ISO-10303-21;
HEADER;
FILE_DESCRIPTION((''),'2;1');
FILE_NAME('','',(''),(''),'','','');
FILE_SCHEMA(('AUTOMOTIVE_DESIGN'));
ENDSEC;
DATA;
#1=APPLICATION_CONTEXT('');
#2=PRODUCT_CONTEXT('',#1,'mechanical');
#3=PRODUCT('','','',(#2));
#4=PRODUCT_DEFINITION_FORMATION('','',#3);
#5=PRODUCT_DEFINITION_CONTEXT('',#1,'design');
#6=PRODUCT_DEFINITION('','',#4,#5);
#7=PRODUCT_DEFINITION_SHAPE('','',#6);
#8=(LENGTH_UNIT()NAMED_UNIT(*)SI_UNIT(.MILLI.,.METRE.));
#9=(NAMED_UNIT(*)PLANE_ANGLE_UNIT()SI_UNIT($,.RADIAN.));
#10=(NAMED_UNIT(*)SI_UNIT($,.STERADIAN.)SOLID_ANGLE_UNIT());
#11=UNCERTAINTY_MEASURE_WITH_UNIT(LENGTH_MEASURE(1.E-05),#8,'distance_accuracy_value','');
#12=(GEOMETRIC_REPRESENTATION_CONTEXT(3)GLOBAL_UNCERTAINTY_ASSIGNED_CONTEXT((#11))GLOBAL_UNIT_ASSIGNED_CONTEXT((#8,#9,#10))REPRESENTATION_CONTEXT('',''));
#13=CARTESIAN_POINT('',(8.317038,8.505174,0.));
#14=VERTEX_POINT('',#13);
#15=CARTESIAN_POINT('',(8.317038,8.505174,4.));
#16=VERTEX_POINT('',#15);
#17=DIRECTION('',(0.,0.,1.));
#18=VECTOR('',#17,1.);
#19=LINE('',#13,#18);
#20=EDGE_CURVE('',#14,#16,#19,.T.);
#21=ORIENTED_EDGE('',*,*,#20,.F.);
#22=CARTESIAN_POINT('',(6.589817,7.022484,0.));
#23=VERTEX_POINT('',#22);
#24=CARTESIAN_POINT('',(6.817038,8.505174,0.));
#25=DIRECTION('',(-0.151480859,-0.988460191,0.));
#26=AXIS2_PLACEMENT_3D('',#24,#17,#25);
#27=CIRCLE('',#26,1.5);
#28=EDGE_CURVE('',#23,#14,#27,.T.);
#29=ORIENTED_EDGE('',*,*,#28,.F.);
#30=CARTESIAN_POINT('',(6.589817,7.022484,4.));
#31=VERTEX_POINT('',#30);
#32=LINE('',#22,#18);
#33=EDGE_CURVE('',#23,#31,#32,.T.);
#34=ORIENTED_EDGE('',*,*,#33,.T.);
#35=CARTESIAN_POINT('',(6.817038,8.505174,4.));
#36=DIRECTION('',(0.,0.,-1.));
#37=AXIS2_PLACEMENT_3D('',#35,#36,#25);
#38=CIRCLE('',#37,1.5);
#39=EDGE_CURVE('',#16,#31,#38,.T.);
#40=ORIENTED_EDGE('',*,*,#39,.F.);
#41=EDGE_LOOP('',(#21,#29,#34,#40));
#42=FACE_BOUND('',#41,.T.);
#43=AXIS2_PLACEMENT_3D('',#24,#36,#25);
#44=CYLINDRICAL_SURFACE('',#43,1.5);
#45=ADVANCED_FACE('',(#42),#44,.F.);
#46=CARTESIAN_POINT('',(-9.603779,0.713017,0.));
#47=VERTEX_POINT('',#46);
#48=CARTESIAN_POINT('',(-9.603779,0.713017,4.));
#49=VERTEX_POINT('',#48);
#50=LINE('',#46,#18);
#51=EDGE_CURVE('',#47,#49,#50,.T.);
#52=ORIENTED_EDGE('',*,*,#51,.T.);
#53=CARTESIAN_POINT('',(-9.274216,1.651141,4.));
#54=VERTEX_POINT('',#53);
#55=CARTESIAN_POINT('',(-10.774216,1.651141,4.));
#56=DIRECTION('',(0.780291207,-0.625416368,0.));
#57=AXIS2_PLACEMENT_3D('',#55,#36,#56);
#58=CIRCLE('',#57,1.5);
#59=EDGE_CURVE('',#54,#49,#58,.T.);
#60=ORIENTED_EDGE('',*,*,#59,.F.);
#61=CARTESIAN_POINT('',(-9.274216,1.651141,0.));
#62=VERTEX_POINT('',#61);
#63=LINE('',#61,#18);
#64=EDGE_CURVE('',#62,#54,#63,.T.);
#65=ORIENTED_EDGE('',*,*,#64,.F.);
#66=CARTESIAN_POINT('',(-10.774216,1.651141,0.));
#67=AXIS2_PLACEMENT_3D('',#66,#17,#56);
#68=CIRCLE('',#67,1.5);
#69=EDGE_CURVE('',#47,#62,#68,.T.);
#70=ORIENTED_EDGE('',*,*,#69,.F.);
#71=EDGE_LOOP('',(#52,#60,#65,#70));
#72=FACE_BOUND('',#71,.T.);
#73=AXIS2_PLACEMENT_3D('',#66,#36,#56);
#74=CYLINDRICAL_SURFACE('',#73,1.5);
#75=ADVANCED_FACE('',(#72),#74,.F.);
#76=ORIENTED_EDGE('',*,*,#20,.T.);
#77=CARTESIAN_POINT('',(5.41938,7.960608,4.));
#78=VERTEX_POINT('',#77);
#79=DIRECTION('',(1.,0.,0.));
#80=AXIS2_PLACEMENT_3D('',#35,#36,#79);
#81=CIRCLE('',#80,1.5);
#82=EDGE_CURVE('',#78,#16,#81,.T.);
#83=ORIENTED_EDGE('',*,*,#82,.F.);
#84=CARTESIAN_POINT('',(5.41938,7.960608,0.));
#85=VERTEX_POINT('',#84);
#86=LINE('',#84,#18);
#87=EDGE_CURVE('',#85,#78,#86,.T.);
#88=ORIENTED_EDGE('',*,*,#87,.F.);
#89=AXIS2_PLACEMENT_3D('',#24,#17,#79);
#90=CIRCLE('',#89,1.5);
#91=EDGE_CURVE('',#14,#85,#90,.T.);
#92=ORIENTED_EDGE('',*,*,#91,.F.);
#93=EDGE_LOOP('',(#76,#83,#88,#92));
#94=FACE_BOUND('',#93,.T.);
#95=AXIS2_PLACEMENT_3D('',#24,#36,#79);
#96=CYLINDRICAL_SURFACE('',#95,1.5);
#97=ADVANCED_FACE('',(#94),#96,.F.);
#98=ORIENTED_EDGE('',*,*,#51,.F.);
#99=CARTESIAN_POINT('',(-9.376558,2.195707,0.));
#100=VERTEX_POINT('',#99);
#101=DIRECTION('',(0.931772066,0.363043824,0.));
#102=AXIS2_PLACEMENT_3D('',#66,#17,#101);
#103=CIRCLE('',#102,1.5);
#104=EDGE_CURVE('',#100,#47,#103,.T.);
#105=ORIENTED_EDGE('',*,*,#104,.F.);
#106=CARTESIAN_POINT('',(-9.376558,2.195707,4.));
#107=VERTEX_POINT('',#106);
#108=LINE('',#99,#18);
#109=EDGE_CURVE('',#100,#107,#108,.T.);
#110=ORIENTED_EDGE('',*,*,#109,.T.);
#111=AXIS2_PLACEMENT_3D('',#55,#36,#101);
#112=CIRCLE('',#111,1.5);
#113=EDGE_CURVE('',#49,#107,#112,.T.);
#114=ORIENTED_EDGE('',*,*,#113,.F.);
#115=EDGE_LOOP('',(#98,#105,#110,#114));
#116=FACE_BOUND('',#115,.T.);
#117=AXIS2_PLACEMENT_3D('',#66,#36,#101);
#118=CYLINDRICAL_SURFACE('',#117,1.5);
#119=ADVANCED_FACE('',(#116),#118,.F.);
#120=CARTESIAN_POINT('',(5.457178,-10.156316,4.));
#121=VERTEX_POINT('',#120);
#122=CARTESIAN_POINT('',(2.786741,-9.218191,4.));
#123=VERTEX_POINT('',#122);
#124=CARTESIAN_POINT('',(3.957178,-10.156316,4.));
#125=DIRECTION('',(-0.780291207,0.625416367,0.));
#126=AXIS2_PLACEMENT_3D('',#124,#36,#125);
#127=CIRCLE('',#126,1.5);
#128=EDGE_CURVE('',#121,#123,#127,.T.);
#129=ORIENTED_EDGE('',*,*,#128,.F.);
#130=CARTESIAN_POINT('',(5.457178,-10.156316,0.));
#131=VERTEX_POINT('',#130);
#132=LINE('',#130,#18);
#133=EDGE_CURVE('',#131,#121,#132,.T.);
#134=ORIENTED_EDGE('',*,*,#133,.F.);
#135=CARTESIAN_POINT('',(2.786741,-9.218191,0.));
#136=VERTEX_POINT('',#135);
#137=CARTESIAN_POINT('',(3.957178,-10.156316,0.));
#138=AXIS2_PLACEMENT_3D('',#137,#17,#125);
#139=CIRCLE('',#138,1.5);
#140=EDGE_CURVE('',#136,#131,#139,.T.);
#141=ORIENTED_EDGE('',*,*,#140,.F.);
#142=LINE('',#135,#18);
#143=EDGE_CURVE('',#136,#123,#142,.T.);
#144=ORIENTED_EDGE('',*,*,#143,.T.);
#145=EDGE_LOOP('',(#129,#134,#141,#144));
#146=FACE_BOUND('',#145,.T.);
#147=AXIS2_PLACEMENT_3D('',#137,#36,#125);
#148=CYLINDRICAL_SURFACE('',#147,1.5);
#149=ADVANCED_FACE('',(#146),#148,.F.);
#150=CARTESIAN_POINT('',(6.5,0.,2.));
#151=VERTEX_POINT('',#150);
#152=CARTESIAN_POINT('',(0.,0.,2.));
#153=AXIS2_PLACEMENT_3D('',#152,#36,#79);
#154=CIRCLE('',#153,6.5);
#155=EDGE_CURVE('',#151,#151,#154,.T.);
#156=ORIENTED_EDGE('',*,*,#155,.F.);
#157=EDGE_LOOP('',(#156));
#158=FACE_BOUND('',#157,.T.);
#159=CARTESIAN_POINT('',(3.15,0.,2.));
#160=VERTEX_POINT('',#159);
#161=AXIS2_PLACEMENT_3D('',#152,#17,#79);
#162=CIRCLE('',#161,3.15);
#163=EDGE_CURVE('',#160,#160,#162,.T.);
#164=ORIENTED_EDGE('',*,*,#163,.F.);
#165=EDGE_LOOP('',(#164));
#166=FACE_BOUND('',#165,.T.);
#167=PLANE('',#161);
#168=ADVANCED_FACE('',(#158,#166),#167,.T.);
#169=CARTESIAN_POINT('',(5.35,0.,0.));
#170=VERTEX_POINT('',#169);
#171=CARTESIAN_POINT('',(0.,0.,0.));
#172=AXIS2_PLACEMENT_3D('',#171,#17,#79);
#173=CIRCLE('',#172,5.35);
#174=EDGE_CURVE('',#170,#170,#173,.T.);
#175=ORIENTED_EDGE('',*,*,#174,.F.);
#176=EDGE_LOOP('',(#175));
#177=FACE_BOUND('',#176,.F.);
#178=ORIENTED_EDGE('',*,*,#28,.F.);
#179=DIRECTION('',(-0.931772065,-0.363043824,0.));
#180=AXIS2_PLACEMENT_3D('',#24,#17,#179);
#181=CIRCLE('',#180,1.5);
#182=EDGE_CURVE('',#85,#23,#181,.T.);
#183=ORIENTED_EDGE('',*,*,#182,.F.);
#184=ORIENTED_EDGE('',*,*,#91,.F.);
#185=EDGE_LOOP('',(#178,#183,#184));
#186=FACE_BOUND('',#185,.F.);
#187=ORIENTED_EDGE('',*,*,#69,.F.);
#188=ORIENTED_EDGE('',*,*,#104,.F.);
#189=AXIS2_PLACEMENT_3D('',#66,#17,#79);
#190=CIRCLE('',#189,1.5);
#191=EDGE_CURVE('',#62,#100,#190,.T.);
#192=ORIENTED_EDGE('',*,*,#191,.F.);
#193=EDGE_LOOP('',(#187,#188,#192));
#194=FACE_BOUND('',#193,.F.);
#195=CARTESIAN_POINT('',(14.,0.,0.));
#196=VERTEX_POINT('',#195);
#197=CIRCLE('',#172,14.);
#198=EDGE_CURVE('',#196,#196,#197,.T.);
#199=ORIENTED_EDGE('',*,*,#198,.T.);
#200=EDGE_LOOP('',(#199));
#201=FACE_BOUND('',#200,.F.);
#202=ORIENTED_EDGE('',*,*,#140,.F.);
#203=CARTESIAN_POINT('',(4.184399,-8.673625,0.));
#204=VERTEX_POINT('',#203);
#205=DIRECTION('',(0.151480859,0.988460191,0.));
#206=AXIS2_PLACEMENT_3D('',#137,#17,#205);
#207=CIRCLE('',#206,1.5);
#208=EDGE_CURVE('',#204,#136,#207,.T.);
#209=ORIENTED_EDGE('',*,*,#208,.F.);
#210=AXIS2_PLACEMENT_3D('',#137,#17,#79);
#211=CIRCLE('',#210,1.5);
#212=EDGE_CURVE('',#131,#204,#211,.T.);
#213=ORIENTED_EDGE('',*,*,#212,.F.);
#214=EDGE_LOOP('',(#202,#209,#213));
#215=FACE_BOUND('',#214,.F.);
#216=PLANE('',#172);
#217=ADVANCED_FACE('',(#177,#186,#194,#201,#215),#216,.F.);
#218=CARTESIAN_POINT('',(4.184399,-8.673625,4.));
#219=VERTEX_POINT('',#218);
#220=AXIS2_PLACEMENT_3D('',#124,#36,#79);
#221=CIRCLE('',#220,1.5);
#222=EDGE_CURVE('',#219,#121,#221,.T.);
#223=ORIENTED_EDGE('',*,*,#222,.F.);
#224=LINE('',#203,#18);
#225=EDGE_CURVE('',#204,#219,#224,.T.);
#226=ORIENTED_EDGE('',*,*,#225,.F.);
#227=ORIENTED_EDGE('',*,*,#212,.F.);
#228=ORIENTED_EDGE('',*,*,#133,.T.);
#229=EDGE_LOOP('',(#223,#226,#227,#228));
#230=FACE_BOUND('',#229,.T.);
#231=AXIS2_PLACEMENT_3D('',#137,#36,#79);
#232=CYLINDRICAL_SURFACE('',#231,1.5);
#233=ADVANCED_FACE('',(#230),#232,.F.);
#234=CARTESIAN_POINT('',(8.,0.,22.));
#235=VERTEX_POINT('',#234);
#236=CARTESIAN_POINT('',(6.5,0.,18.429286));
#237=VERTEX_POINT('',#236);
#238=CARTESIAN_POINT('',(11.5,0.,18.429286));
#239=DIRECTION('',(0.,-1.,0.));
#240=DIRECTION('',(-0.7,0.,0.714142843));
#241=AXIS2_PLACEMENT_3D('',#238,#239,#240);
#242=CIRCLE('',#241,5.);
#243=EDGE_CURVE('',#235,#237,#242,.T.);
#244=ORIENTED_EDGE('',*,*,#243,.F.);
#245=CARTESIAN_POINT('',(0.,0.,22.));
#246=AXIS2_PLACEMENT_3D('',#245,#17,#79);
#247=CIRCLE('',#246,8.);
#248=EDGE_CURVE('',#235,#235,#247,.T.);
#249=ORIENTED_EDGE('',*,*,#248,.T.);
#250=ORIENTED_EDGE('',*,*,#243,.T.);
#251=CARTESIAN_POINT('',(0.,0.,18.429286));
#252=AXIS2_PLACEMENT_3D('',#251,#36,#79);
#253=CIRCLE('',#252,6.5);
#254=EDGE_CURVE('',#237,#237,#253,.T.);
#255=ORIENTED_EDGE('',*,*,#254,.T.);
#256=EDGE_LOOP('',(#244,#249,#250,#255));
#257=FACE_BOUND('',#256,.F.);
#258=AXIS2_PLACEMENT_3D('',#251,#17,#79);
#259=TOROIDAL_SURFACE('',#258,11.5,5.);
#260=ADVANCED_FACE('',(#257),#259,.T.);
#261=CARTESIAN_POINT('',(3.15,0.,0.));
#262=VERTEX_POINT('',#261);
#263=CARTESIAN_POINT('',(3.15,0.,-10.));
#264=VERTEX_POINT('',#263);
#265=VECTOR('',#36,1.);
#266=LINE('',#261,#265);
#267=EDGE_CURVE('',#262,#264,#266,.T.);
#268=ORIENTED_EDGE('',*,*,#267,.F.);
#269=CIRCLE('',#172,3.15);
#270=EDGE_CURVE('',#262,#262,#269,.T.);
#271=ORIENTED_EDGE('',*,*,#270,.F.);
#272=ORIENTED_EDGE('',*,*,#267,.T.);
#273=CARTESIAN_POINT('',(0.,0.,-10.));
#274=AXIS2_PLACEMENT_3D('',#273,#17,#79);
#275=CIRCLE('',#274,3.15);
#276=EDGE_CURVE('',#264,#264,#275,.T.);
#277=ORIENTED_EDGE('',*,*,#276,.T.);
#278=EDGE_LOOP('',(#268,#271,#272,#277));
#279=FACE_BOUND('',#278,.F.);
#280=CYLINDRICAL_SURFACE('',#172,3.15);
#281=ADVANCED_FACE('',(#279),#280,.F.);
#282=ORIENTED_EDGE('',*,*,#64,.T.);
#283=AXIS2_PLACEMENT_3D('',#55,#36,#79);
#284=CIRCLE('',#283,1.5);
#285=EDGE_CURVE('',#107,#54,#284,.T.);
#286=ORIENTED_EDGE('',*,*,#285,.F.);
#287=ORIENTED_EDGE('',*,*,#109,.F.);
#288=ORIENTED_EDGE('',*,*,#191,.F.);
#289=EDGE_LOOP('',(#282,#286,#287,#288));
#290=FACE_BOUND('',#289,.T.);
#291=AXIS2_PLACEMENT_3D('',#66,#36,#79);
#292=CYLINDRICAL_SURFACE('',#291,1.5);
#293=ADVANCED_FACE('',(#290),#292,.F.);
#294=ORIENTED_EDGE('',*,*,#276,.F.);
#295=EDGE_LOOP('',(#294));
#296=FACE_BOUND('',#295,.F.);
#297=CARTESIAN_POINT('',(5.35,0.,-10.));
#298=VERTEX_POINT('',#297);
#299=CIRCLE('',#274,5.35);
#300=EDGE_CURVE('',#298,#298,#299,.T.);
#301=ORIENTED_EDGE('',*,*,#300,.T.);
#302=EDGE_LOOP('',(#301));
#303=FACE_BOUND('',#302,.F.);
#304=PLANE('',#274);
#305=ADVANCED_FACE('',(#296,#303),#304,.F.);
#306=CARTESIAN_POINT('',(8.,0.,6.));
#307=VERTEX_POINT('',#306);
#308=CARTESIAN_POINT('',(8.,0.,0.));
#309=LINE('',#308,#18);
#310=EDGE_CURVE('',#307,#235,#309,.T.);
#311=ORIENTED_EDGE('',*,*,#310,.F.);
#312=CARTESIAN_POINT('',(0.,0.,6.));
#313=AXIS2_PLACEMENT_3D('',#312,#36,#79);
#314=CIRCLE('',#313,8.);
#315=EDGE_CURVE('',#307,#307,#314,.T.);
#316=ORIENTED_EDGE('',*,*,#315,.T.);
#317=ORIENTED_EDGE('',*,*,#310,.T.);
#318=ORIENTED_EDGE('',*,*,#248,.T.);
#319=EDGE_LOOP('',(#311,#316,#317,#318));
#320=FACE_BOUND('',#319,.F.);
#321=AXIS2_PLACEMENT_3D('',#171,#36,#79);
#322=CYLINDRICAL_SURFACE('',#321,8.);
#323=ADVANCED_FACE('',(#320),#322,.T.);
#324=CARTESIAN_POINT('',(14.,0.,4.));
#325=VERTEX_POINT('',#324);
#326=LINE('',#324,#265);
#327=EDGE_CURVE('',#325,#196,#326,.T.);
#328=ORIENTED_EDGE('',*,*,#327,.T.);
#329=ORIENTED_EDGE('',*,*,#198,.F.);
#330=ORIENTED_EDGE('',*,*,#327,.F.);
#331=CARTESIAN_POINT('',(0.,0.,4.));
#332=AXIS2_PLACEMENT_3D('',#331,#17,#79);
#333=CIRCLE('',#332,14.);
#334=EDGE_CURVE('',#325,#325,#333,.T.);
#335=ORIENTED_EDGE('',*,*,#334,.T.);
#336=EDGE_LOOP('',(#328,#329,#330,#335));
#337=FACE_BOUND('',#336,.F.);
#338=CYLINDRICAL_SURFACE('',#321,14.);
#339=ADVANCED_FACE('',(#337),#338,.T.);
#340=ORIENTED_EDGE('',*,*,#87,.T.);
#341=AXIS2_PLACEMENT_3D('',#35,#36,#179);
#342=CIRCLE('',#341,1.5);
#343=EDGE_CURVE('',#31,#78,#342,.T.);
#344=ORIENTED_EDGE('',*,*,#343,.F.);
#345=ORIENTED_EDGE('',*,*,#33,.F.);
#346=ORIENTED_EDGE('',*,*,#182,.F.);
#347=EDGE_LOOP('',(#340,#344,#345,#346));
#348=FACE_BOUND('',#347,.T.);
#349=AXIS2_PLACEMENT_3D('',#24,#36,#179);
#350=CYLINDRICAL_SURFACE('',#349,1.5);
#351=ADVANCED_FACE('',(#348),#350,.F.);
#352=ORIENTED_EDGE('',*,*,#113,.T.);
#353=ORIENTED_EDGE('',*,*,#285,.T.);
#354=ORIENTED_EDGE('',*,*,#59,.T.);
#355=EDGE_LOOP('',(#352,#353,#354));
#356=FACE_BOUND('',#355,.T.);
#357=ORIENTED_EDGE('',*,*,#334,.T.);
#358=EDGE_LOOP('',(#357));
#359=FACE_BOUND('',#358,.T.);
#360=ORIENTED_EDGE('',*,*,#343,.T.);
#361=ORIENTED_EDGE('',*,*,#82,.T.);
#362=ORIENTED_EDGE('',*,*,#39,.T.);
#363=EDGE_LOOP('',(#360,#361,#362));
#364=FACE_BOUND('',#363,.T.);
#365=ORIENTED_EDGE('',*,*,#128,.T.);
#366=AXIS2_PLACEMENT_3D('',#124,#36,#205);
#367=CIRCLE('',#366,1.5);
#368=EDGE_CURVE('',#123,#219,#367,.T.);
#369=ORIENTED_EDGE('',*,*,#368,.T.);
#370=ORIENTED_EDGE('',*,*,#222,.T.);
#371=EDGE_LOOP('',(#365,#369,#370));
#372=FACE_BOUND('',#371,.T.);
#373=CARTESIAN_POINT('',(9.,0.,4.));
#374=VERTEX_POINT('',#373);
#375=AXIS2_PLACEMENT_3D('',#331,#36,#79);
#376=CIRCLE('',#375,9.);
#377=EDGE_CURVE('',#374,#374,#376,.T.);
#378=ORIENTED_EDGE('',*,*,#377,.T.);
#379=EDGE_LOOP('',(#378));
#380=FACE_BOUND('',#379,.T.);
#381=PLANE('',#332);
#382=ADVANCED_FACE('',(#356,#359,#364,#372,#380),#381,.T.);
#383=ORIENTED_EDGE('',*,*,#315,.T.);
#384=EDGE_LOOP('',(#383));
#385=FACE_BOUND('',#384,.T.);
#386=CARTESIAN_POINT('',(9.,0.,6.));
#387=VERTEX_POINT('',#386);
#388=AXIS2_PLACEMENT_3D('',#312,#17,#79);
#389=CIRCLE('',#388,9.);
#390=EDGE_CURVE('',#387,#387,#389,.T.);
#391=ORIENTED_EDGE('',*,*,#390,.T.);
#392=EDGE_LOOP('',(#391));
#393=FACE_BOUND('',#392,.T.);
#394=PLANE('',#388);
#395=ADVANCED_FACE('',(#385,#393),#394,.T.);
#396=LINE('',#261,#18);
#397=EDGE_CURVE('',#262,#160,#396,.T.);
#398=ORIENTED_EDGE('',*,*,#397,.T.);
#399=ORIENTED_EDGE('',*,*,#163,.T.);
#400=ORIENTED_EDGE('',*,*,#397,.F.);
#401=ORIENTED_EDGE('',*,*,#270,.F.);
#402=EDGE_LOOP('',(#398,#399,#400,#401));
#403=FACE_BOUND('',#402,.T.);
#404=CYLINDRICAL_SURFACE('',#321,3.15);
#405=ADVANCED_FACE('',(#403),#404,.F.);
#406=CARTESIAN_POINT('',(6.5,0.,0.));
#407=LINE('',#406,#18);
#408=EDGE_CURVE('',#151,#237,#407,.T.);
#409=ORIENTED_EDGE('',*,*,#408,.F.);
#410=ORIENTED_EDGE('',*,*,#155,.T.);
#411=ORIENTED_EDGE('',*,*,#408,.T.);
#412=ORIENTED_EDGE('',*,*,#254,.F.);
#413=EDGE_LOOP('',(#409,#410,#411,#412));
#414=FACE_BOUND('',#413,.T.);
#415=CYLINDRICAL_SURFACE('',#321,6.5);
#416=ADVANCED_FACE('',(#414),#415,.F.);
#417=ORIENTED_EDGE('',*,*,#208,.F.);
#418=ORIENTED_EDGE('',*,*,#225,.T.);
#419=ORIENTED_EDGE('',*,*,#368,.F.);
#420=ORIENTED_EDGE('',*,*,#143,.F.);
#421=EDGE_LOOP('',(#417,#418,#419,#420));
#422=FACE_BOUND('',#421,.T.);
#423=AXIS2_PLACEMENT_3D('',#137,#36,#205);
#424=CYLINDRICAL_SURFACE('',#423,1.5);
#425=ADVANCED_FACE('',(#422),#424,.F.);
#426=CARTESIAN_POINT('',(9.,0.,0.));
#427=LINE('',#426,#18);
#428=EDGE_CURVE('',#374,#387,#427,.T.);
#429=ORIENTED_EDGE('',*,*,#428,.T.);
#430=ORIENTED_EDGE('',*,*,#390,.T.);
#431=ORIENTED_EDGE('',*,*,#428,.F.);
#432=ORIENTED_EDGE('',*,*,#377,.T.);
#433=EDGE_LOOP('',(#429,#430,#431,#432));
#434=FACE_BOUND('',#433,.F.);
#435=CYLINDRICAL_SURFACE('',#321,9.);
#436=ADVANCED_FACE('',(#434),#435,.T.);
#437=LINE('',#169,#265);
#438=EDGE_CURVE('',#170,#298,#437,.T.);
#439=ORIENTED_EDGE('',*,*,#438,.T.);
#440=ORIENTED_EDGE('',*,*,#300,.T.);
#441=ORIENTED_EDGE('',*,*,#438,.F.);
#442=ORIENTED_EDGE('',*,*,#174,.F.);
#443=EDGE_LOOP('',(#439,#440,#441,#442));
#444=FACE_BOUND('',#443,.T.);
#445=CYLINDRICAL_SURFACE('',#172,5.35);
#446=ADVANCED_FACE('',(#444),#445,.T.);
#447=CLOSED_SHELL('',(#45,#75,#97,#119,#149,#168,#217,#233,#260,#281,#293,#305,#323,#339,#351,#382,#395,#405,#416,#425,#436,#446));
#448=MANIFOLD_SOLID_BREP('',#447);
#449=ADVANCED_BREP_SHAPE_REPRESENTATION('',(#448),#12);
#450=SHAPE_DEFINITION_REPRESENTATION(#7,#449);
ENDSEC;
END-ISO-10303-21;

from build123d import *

# Parameters (mm, degrees)
F0_R      = 14
F0_R_2    = 3.15
F1_DEPTH  = 4
F2_R      = 9
F3_DEPTH  = 6
F4_R      = 8
F5_DEPTH  = 22
F6_R      = 6.5
F7_DEPTH  = 25
F10_DEPTH = 2
F11_DEPTH = 25
F9_R      = 5.35
F9_R_2    = 3.15
F12_DEPTH = 10


# Not quite as in the source:
# - a fillet or chamfer that OpenCascade refuses, or shapes differently, is made with other operations: its cross-section is extruded or revolved along the edge and cut away or added


with BuildPart() as f1:
    # F0 (on Top) → F1 (new body)
    with BuildSketch(Plane.XY):
        Circle(F0_R)
        Circle(F0_R_2, mode=Mode.SUBTRACT)
    extrude(amount=F1_DEPTH)

    # F2 (on Top) → F3 (join)
    with BuildSketch(Plane.XY):
        Circle(F2_R)
    extrude(amount=F3_DEPTH)

    # F4 (on Top) → F5 (join)
    with BuildSketch(Plane.XY):
        Circle(F4_R)
    extrude(amount=F5_DEPTH)

    # F6 (on Top) → F7 (cut)
    with BuildSketch(Plane.XY):
        Circle(F6_R)
    extrude(amount=F7_DEPTH, mode=Mode.SUBTRACT)

    # F0 (on Top) → F10 (join)
    with BuildSketch(Plane.XY):
        Circle(F0_R)
        Circle(F0_R_2, mode=Mode.SUBTRACT)
    extrude(amount=F10_DEPTH)

    # F8 (on Top) → F11 (cut)
    with BuildSketch(Plane.XY):
        with BuildLine():
            Line((3.9571776785, -10.1563155141), (2.7867408683, -9.2181909629))
            ThreePointArc((2.7867408683, -9.2181909629), (3.460013327, -11.5715284336), (5.4571776785, -10.1563155141))
            ThreePointArc((5.4571776785, -10.1563155141), (5.0953410965, -9.1792873497), (4.1843989666, -8.6736252274))
            Line((4.1843989666, -8.6736252274), (3.9571776785, -10.1563155141))
        make_face()
        with BuildLine():
            ThreePointArc((4.1843989666, -8.6736252274), (3.4126119429, -8.7586574158), (2.7867408683, -9.2181909629))
            Line((2.7867408683, -9.2181909629), (3.9571776785, -10.1563155141))
            Line((3.9571776785, -10.1563155141), (4.1843989666, -8.6736252274))
        make_face()
        with BuildLine():
            Line((-9.6037792731, 0.7130168091), (-10.7742160833, 1.6511413602))
            Line((-10.7742160833, 1.6511413602), (-9.376557985, 2.1957070958))
            ThreePointArc((-9.376557985, 2.1957070958), (-12.2569063699, 1.8783626483), (-9.6037792731, 0.7130168091))
        make_face()
        with BuildLine():
            Line((-9.376557985, 2.1957070958), (-10.7742160833, 1.6511413602))
            Line((-10.7742160833, 1.6511413602), (-9.6037792731, 0.7130168091))
            ThreePointArc((-9.6037792731, 0.7130168091), (-9.3590031637, 1.1539770087), (-9.2742160833, 1.6511413602))
            ThreePointArc((-9.2742160833, 1.6511413602), (-9.3000235674, 1.9281908617), (-9.376557985, 2.1957070958))
        make_face()
        with BuildLine():
            ThreePointArc((8.3170384048, 8.5051741539), (6.5399889033, 9.9793666697), (5.4193803065, 7.9606084183))
            Line((5.4193803065, 7.9606084183), (6.8170384048, 8.5051741539))
            Line((6.8170384048, 8.5051741539), (6.5898171167, 7.0224838672))
            ThreePointArc((6.5898171167, 7.0224838672), (7.7940665691, 7.3670107359), (8.3170384048, 8.5051741539))
        make_face()
        with BuildLine():
            Line((6.8170384048, 8.5051741539), (5.4193803065, 7.9606084183))
            ThreePointArc((5.4193803065, 7.9606084183), (5.8789138537, 7.3347373437), (6.5898171167, 7.0224838672))
            Line((6.5898171167, 7.0224838672), (6.8170384048, 8.5051741539))
        make_face()
    extrude(amount=F11_DEPTH, mode=Mode.SUBTRACT)

    # F9 (on Top) → F12 (join)
    with BuildSketch(Plane.XY):
        Circle(F9_R)
        Circle(F9_R_2, mode=Mode.SUBTRACT)
    extrude(amount=-F12_DEPTH)

    # F13: fillet of radius 5 on 1 edges, made by hand

    # F13_s1 → F13_t2 (revolve, cut)
    with BuildSketch(Plane.XZ):
        with BuildLine():
            ThreePointArc((8, 22), (6.8902277714, 20.3657774588), (6.5, 18.4292857857))
            Line((6.5, 18.4292857857), (6.5, 22))
            Line((6.5, 22), (8, 22))
        make_face()
    revolve(axis=Axis((0, 0, 22), (0, 0, -1)), mode=Mode.SUBTRACT)


solid = f1.part
